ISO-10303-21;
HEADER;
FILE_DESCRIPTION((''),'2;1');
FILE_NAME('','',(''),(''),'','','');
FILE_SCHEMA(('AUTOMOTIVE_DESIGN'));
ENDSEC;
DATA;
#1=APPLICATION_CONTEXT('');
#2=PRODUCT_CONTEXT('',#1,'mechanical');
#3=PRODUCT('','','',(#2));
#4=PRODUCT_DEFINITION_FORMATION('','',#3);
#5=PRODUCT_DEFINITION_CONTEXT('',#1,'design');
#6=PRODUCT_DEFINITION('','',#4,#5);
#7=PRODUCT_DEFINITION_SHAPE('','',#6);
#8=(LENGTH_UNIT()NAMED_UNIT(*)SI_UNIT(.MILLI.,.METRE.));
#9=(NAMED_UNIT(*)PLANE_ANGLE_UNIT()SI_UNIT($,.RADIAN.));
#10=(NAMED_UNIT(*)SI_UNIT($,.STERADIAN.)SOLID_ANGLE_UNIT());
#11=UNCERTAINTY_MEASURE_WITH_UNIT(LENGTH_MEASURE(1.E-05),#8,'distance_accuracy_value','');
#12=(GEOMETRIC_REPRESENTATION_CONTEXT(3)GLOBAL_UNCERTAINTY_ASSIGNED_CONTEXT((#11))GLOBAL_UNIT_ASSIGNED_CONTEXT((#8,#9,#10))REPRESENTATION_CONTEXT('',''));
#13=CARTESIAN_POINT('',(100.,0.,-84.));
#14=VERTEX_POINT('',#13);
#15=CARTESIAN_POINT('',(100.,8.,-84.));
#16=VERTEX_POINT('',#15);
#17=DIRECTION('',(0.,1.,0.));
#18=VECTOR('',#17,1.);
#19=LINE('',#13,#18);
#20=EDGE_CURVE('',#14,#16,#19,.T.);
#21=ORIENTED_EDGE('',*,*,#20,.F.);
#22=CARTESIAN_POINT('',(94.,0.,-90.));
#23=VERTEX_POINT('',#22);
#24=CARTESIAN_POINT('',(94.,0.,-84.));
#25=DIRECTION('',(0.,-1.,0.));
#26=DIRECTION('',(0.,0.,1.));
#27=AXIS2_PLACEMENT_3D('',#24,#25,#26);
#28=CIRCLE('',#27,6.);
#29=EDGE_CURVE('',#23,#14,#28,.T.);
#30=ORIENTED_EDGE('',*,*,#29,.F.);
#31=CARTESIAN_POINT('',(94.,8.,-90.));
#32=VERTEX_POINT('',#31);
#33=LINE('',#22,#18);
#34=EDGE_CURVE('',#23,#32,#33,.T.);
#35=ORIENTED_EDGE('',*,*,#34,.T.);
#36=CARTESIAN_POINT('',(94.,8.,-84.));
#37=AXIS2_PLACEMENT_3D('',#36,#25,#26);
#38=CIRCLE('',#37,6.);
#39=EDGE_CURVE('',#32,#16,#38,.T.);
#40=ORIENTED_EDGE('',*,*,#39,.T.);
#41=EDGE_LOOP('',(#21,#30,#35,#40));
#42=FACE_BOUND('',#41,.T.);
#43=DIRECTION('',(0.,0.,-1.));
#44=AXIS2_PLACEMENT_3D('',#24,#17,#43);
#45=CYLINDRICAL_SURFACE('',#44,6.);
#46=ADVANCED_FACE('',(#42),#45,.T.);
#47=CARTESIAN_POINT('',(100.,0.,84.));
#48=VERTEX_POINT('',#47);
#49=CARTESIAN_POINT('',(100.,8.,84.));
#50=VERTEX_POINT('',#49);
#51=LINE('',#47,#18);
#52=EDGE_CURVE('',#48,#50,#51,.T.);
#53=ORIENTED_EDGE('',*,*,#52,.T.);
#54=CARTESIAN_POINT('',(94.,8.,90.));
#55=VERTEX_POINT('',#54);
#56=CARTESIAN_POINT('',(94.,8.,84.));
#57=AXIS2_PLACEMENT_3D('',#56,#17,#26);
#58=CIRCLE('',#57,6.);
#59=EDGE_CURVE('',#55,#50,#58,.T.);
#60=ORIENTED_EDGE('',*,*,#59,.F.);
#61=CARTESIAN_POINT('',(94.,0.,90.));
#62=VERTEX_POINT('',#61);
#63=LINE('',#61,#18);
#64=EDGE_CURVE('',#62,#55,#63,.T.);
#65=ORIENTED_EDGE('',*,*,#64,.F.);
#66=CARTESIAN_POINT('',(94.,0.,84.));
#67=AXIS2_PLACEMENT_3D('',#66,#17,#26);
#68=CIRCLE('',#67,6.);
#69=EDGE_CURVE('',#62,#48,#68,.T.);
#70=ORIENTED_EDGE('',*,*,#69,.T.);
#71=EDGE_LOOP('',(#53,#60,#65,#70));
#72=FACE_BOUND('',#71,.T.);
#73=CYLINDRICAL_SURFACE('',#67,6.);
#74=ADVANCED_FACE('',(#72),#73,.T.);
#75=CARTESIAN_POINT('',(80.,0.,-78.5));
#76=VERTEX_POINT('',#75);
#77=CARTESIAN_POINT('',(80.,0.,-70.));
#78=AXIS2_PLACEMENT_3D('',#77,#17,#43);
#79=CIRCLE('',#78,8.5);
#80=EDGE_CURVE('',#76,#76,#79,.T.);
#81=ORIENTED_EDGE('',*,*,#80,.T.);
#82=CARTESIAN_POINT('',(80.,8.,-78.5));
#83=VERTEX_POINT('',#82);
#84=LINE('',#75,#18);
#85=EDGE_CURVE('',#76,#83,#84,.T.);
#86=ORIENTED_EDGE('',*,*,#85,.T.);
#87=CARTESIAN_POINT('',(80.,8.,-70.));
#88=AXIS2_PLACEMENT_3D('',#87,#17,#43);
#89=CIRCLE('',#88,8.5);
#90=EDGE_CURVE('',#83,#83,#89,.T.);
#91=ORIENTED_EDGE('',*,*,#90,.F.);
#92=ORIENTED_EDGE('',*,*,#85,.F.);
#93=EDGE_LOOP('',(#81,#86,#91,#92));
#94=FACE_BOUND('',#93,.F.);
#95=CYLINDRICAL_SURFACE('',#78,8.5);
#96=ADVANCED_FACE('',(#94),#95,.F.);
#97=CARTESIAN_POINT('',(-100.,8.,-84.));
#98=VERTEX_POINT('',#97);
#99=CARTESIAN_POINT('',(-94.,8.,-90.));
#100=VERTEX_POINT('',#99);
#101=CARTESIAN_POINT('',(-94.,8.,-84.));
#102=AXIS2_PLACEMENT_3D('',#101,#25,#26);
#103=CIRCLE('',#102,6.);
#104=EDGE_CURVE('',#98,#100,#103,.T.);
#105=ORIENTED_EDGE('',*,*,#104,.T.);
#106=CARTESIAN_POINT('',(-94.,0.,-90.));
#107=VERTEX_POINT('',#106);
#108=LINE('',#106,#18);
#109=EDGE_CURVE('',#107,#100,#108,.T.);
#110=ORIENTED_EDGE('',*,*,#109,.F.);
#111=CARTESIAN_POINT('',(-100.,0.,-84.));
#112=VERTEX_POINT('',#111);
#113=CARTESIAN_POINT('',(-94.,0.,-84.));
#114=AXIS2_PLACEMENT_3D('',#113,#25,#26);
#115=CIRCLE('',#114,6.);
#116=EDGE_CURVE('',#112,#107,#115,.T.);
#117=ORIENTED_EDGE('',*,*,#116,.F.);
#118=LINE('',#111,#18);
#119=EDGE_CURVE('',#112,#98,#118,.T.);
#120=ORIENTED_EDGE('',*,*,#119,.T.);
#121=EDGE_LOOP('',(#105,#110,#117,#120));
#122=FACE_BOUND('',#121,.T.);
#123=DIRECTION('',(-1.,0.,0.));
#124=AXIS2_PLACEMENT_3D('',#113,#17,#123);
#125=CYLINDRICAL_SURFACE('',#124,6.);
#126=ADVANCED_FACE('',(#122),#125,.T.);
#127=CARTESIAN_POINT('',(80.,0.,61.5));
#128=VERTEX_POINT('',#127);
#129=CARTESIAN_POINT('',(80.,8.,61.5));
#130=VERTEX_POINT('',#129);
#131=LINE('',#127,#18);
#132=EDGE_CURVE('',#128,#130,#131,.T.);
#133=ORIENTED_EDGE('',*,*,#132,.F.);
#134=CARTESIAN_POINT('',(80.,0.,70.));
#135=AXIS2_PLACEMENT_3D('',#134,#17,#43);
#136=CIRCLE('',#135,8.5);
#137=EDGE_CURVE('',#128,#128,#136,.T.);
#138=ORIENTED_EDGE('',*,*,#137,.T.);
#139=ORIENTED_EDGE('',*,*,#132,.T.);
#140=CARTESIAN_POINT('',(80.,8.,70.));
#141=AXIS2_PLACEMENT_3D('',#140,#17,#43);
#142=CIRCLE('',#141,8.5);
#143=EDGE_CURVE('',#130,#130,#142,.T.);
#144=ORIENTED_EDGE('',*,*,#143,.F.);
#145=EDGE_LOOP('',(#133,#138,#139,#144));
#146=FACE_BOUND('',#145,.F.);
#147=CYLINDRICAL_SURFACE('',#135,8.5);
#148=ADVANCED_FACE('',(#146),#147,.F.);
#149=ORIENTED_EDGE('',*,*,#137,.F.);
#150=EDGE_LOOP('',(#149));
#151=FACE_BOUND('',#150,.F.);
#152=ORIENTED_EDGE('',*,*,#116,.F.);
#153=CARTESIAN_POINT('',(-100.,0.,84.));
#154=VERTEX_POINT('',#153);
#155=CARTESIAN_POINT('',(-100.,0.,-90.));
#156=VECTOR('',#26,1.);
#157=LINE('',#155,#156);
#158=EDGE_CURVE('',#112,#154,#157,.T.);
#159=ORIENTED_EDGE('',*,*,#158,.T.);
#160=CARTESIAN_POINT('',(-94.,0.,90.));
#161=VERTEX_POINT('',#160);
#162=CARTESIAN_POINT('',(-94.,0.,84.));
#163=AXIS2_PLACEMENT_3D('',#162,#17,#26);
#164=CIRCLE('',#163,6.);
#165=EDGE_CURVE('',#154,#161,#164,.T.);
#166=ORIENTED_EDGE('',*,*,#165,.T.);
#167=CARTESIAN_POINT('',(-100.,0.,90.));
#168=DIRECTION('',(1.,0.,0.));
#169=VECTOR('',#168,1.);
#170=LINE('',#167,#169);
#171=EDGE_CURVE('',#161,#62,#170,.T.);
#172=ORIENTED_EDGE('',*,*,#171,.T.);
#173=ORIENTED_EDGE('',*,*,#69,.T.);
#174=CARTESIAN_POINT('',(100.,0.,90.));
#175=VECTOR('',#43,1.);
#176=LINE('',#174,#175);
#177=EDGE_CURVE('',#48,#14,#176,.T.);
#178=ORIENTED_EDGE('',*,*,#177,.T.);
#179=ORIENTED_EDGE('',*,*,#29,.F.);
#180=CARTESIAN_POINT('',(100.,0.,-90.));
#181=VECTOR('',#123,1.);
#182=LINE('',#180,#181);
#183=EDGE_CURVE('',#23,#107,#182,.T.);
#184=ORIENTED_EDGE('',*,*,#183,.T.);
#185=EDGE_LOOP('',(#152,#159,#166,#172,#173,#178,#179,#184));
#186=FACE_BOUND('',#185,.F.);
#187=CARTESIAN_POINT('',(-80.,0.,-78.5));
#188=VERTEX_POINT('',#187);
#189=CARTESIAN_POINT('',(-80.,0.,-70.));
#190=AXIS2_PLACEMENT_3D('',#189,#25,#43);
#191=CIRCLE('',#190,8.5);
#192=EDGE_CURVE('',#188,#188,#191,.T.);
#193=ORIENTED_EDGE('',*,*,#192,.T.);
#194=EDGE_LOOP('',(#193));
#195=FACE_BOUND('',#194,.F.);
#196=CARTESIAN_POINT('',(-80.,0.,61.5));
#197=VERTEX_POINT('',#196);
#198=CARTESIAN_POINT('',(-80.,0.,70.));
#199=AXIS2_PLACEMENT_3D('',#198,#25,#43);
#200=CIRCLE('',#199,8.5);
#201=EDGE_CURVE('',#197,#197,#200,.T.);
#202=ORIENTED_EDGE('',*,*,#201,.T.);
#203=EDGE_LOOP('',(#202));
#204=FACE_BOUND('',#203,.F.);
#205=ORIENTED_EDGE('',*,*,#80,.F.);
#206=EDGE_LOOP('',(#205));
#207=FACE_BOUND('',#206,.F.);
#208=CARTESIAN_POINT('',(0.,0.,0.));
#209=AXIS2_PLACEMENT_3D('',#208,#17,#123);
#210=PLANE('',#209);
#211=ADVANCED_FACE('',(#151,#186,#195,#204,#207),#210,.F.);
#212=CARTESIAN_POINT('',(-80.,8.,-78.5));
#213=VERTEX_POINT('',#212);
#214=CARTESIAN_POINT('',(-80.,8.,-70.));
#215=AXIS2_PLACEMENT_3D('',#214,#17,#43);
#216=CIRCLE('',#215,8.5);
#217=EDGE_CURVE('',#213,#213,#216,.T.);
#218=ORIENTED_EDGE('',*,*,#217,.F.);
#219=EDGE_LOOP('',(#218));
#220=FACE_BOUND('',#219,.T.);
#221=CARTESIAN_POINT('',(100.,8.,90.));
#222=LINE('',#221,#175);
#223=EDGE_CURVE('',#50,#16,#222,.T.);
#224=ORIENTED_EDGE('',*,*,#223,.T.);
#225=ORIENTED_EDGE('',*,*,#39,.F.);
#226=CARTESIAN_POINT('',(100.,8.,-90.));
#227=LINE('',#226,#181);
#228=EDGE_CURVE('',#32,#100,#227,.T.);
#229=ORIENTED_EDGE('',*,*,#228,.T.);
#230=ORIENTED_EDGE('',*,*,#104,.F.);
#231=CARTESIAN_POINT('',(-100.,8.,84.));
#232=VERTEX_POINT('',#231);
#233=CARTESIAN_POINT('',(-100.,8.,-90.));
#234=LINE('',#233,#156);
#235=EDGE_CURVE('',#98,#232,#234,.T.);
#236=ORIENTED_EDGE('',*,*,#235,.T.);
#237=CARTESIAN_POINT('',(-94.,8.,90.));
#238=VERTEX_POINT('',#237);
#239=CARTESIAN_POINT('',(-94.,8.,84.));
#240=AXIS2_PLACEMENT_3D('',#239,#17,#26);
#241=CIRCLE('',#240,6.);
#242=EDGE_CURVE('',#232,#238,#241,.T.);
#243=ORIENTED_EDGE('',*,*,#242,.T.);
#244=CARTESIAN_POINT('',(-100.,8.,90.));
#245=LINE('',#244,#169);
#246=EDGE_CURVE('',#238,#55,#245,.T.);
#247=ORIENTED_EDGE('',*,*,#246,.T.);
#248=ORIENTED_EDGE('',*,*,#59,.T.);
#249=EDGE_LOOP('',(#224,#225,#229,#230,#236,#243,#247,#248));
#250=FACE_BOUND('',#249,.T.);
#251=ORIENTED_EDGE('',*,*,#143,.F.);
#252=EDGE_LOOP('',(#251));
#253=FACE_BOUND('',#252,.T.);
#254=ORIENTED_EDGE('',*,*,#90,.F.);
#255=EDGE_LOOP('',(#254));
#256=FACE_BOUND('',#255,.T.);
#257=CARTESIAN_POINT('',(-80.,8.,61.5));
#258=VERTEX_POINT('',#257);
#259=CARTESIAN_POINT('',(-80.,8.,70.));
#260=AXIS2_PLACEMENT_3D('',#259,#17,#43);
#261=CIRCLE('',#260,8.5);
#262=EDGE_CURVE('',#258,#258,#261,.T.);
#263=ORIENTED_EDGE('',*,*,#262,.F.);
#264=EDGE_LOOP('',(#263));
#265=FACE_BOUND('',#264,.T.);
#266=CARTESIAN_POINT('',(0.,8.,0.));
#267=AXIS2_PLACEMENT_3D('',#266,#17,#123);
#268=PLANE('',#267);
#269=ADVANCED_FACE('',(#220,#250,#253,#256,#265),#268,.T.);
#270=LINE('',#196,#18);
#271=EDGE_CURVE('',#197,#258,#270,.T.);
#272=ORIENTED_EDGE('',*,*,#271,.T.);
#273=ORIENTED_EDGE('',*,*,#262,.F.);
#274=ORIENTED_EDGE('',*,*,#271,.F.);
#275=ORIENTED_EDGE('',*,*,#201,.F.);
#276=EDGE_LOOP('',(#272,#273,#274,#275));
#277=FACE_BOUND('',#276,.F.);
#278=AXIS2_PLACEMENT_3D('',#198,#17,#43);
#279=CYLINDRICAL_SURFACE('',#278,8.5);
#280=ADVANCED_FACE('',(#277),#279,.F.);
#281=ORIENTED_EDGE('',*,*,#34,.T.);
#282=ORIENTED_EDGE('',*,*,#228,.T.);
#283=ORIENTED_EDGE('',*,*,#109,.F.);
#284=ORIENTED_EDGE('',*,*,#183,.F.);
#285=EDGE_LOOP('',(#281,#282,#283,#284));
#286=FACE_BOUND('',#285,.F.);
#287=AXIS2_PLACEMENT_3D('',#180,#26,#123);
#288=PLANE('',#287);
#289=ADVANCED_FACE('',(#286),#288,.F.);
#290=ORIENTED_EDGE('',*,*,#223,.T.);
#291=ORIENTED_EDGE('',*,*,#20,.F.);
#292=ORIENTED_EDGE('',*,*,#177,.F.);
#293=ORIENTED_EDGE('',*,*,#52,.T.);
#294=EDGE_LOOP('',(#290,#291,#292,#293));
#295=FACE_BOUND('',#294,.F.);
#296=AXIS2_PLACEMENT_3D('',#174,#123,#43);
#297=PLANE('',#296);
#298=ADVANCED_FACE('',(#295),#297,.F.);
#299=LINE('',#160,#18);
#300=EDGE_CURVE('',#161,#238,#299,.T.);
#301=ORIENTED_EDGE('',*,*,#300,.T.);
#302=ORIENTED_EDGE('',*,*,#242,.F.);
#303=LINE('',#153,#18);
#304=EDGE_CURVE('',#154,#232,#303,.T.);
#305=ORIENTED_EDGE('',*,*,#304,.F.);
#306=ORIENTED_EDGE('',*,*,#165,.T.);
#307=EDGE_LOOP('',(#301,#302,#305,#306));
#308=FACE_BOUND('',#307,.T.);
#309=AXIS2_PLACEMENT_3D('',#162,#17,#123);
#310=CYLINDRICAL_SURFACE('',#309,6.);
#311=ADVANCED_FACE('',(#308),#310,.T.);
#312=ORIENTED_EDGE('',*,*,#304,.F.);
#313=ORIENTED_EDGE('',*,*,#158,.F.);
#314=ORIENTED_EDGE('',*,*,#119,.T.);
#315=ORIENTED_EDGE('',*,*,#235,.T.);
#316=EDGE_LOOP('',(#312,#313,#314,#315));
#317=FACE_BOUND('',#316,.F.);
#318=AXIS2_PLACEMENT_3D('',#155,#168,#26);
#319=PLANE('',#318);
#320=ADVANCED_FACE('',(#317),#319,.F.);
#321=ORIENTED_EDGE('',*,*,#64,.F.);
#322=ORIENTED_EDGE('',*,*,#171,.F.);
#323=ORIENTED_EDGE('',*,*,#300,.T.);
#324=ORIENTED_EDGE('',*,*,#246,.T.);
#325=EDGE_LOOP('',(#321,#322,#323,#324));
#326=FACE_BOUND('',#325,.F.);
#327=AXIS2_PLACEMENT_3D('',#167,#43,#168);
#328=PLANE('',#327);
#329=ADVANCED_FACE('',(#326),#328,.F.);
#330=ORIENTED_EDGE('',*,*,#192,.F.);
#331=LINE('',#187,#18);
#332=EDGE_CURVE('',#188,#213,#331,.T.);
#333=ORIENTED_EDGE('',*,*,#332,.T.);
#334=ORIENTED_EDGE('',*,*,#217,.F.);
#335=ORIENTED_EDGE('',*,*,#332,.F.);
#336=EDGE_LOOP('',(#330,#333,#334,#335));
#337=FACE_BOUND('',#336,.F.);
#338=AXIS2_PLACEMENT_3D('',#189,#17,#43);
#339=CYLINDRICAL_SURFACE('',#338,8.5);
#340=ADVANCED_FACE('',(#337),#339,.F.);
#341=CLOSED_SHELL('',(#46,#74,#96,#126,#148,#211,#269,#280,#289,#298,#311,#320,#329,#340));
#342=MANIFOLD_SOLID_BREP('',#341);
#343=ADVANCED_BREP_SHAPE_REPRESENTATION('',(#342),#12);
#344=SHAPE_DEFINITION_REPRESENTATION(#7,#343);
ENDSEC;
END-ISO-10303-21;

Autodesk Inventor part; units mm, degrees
ref_plane "YZ Plane" through (0, 0, 0) normal (1, 0, 0) x (0, 1, 0)
ref_plane "XZ Plane" through (0, 0, 0) normal (0, 1, 0) x (-1, 0, 0)
ref_plane "XY Plane" through (0, 0, 0) normal (0, 0, 1) x (1, 0, 0)
sketch "Sketch1" plane through (0, 0, 0) normal (0, 1, 0) x (-1, 0, 0)
  line L0 (100, 90) -> (-100, 90)
  line L1 (-100, 90) -> (-100, -90)
  line L2 (-100, -90) -> (100, -90)
  line L3 (100, -90) -> (100, 90)
  point P0 (0, 0)
  point P1 (0, 90)
  point P2 (100, 0)
  dimension "d0" = 200
  dimension "d1" = 180
extrude "Plate1" add sketch "Sketch1" along normal blind 8
sketch "Sketch2" plane through (0, 0, 0) normal (0, -1, 0) x (1, 0, 0)
  line L0 (80, 70) -> (80, -70) construction
  line L1 (-100, -90) -> (-100, 90) projected
  line L2 (100, 90) -> (100, -90) projected
  point P0 (0, 0)
  point P1 (80, 0)
  point P2 (-100, 0)
  dimension "d10" = 20
  dimension "d12" = 20
hole "Hole1" at (80, 0, 70) at (80, 0, -70) direction (0, 1, 0) diameter 17 end through all
fillet "Corner Round1" radius 6 4 edges at (100, 4, 90) (100, 4, -90) (-100, 4, -90) (-100, 4, 90)
mirror "Mirror1" about plane through (0, 0, 0) normal (1, 0, 0) of "Hole1"
equation "\"d12\" = d10"
equation "\"d8\" = Thickness"
equation "\"d2\" = Thickness"
equation "\"BendRadius\" = Thickness"
equation "\"BendReliefWidth\" = Thickness"
equation "\"BendReliefDepth\" = 0.5 * Thickness"
equation "\"CornerReliefSize\" = 4 * Thickness"
equation "\"MinimumRemnant\" = 2 * Thickness"
equation "\"TransitionRadius\" = BendRadius"
equation "\"JacobiRadiusSize\" = BendRadius"
equation "\"GapSize\" = Thickness"
equation "\"Thickness\" = 8"
properties part number "Сrane plate 6"
